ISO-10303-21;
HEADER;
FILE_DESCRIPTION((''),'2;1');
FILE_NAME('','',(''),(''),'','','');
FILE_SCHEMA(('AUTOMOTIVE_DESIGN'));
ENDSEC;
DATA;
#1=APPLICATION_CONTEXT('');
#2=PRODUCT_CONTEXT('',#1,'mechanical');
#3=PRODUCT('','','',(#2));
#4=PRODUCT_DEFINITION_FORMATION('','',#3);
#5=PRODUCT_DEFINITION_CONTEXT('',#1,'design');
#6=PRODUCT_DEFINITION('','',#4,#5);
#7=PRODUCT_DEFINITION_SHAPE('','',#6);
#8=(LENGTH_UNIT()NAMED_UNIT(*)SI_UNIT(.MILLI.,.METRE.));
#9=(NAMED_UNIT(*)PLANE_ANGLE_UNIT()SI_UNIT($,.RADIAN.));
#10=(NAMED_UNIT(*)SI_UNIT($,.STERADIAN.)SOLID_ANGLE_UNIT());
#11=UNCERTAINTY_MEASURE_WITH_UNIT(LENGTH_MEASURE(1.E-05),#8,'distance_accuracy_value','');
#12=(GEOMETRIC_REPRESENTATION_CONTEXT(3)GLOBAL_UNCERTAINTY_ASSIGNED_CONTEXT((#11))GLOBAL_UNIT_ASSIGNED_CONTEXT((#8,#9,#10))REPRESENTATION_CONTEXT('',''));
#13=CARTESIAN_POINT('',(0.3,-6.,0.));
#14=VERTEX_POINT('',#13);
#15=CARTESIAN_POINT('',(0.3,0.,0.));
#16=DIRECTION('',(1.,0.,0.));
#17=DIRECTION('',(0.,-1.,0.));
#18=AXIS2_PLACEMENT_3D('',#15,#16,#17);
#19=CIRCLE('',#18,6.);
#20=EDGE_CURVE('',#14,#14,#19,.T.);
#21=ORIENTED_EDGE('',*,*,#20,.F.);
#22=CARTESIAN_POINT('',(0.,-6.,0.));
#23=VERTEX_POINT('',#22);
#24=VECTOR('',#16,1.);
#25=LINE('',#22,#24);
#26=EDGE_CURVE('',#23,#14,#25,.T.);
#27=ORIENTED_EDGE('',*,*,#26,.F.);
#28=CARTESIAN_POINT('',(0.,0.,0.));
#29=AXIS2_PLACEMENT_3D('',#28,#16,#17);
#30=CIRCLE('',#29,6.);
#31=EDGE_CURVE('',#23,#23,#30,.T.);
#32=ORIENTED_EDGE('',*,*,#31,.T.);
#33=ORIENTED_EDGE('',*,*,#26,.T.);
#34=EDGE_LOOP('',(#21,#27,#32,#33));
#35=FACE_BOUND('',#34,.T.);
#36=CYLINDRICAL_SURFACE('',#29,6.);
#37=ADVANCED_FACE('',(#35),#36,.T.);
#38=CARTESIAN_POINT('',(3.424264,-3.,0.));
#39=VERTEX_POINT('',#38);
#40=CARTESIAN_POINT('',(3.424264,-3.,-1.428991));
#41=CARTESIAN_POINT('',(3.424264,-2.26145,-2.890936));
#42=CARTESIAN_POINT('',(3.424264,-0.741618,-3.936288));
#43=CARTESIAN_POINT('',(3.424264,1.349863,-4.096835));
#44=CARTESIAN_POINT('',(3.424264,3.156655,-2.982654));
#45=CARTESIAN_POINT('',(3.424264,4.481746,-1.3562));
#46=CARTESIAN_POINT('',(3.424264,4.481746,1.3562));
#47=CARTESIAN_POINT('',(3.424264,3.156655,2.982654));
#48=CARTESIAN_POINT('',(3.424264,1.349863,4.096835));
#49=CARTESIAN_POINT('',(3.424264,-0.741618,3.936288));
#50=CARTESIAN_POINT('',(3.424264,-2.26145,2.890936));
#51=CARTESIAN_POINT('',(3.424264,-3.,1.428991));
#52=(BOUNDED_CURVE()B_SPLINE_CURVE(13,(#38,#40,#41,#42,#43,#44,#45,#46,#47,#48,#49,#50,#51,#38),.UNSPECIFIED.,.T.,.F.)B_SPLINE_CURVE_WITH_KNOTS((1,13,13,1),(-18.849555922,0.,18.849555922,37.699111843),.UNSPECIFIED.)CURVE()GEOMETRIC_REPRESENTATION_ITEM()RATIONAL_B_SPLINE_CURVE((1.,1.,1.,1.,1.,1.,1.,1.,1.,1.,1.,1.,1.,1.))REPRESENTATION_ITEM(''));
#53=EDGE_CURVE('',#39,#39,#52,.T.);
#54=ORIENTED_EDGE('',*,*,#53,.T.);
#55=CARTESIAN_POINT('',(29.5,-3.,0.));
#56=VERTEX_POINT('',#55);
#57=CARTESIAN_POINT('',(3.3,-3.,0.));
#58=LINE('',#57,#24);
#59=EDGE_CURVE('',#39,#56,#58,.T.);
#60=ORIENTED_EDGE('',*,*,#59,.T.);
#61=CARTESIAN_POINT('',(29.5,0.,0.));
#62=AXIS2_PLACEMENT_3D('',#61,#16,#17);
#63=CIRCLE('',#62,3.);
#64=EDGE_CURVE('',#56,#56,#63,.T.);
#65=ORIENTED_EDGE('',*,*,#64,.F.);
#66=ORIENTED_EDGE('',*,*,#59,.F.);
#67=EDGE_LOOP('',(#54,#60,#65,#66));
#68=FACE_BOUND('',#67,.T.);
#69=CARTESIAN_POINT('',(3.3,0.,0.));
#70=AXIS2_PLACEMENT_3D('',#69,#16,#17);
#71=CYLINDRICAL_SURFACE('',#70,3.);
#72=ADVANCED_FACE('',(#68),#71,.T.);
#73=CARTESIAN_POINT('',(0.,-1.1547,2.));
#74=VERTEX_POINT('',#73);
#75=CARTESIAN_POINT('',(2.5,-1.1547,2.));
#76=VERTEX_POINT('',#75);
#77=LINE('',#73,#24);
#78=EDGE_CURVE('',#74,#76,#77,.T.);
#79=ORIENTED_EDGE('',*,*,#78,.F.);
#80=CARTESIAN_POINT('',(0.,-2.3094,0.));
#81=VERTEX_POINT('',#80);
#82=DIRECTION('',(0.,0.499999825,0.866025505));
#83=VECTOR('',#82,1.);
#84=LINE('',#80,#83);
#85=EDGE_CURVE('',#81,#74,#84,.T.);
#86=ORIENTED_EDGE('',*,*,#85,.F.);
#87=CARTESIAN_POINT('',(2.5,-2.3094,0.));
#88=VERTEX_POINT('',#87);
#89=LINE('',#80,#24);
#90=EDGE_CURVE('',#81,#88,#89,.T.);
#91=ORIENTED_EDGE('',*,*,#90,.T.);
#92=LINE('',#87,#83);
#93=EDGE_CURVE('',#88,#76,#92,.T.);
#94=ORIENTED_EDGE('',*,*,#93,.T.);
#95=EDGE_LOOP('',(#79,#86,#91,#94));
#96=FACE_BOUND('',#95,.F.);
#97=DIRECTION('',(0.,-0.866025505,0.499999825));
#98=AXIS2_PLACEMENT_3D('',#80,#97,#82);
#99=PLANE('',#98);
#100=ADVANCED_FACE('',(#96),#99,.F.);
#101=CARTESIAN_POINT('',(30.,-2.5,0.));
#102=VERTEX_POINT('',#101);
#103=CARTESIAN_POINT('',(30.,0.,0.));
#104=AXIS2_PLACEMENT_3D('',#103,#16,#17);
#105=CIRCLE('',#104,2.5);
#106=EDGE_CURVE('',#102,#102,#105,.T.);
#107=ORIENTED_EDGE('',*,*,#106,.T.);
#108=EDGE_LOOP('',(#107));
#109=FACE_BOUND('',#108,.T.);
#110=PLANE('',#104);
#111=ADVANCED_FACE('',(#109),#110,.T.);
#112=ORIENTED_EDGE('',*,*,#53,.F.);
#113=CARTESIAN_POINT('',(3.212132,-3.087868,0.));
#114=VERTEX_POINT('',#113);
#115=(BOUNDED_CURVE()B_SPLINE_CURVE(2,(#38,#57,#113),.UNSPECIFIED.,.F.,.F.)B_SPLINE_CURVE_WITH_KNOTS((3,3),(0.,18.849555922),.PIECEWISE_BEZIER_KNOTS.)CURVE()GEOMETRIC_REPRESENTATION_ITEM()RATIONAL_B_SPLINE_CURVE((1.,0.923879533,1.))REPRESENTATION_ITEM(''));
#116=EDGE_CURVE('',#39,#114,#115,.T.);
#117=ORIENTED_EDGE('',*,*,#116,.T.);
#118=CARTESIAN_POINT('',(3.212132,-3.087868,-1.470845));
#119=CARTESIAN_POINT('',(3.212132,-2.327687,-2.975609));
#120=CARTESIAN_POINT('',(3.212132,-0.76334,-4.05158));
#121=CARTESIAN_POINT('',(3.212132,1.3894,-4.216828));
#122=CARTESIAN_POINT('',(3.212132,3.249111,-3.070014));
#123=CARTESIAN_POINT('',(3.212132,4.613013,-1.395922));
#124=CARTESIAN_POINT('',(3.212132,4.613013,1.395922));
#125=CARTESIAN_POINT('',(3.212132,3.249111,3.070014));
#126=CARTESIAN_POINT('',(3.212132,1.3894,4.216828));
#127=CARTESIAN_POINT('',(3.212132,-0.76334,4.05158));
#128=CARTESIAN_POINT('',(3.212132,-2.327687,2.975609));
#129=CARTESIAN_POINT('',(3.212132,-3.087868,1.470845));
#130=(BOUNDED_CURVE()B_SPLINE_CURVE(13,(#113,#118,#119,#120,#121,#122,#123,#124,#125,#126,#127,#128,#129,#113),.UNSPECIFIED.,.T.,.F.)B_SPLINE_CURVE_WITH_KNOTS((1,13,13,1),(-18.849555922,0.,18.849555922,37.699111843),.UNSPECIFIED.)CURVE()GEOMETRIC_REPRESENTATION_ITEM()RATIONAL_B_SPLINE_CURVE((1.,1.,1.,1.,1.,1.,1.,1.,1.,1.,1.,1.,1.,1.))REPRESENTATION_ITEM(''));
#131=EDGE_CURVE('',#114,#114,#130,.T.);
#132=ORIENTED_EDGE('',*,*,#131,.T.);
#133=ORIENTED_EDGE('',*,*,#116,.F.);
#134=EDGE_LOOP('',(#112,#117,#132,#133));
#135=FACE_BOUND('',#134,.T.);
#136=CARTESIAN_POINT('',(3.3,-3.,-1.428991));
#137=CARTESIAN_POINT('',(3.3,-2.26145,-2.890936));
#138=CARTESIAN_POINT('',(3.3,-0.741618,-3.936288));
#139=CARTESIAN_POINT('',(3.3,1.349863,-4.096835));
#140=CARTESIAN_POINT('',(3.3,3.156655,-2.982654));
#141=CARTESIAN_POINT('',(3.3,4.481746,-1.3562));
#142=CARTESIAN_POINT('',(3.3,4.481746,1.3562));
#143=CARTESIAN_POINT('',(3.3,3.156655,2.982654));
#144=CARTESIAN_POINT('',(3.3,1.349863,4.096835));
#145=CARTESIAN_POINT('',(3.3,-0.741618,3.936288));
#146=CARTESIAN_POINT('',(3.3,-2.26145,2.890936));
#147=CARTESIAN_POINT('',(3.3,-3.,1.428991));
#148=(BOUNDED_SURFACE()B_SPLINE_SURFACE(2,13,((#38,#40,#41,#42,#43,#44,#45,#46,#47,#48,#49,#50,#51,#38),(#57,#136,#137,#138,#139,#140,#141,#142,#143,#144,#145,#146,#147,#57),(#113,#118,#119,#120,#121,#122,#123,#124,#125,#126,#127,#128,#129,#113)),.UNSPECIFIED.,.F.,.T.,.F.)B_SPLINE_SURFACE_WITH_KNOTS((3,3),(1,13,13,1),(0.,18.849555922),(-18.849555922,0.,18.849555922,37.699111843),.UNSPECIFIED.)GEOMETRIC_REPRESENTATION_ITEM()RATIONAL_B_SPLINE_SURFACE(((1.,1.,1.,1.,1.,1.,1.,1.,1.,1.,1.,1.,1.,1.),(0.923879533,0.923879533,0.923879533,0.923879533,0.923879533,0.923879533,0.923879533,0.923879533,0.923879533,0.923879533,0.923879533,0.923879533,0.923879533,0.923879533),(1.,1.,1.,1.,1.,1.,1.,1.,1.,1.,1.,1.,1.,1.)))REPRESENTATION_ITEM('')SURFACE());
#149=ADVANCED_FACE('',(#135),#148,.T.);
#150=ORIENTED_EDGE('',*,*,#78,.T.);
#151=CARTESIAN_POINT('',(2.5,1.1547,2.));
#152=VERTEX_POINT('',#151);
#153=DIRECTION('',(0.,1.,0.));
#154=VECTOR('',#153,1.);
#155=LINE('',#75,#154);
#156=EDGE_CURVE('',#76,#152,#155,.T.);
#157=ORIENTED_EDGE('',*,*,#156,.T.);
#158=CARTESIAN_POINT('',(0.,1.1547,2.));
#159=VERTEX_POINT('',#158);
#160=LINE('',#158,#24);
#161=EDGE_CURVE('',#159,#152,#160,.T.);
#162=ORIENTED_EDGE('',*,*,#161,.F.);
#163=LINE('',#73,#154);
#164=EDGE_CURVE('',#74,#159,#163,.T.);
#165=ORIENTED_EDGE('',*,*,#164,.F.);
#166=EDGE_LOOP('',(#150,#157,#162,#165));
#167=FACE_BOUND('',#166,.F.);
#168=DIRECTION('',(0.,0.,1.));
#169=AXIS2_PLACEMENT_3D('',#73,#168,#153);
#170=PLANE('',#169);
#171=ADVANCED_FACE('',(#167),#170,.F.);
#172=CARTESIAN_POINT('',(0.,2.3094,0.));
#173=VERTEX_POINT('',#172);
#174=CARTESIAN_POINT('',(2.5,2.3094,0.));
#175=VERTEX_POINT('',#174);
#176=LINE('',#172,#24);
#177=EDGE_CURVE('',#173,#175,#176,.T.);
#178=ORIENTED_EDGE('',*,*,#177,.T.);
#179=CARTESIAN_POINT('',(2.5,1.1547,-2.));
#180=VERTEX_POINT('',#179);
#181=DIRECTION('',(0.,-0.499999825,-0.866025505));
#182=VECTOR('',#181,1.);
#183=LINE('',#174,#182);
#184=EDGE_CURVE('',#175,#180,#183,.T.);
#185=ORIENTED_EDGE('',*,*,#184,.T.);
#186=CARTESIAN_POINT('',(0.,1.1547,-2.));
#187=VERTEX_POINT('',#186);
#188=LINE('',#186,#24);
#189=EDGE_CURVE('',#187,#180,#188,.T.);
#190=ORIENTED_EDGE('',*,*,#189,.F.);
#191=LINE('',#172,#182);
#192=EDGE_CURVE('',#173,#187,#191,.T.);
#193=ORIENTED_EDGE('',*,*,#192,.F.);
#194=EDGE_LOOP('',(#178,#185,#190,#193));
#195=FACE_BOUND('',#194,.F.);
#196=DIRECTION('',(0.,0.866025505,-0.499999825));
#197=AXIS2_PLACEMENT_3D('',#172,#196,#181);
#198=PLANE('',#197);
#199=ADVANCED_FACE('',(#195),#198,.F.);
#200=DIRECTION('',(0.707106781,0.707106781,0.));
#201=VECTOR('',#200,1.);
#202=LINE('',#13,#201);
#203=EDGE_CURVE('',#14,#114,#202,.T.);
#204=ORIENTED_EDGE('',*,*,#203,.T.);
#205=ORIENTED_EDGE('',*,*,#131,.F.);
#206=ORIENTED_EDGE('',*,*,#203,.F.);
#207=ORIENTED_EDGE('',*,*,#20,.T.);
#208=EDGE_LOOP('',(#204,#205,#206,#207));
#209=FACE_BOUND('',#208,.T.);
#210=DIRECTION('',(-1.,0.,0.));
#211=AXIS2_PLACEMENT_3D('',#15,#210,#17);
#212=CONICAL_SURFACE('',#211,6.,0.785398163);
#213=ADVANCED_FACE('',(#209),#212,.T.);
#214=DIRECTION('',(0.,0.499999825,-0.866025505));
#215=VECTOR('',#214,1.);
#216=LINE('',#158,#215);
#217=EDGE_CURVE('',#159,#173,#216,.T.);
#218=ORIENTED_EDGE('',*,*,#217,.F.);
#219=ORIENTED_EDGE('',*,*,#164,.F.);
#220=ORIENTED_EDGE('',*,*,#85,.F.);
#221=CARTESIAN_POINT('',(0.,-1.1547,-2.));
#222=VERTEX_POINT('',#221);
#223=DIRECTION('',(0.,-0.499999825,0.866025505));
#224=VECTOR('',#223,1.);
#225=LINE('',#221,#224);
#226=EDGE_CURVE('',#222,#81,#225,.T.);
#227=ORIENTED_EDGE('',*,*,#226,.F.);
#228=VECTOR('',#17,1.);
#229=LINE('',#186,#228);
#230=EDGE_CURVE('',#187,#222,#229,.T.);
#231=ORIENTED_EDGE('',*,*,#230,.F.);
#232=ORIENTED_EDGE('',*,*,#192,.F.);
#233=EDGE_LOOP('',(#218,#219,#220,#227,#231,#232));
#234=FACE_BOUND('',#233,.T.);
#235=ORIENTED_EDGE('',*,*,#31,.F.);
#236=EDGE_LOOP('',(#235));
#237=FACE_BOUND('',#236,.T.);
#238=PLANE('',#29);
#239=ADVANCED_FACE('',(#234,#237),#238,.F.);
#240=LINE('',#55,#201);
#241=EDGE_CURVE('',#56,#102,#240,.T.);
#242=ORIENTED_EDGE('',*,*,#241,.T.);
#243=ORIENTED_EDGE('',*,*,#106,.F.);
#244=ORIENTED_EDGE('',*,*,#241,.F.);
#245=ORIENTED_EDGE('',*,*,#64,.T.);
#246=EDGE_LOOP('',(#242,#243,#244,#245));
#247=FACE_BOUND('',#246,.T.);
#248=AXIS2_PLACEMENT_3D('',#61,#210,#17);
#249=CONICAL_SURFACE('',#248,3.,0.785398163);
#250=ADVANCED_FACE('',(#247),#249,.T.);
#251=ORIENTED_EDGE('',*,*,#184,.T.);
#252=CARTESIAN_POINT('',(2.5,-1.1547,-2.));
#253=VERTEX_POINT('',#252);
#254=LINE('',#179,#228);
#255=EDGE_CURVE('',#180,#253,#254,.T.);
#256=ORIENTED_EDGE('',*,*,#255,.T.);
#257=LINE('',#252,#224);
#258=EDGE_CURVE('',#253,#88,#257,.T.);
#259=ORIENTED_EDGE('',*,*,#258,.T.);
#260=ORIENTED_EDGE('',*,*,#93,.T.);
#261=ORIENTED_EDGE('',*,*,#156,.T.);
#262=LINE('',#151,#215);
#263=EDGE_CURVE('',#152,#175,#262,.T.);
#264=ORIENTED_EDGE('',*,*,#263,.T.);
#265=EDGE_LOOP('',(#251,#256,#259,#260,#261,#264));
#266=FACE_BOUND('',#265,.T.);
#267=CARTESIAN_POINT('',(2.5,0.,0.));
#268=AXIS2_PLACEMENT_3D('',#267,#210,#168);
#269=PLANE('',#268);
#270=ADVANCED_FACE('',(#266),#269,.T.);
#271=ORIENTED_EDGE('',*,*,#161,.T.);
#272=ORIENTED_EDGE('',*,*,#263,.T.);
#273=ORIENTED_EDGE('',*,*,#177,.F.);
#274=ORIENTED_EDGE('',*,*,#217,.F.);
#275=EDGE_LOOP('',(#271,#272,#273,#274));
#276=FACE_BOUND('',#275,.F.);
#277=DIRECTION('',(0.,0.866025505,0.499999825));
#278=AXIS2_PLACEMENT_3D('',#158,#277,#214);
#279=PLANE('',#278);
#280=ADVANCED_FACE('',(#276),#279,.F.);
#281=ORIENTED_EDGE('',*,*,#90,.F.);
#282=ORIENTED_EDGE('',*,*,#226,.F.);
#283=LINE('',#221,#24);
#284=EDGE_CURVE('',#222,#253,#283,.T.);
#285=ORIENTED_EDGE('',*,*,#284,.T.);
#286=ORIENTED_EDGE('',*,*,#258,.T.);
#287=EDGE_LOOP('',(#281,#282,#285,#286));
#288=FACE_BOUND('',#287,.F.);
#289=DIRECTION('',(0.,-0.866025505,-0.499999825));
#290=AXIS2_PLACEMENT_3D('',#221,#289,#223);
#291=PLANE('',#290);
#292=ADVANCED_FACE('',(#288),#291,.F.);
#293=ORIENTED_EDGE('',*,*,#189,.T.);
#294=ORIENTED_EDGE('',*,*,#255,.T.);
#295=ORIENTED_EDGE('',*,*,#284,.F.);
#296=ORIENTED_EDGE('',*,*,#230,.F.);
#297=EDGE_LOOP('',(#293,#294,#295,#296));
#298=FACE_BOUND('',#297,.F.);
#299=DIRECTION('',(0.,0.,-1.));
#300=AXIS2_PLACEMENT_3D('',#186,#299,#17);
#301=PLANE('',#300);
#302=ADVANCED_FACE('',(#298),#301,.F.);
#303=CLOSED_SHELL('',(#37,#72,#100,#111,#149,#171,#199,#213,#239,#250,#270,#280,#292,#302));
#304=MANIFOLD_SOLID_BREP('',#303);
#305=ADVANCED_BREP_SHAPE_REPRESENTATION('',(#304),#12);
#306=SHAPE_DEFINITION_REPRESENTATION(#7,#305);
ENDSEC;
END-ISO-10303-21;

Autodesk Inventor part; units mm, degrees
ref_plane "YZ Plane" through (0, 0, 0) normal (1, 0, 0) x (0, 1, 0)
sketch "Sketch1" plane through (0, 0, 0) normal (0, 1, 0) x (-1, 0, 0)
  point P0 (0, 0)
sketch "Sketch2" plane through (0, 0, 0) normal (0, 0, 1) x (-1, 0, 0)
  line L0 (-30, 3) -> (-30, 0)
  line L1 (-3.3, 3) -> (-30, 3)
  line L2 (-0.3, 6) -> (-3.3, 3)
  line L3 (0, 6) -> (-0.3, 6)
  line L4 (0, 0) -> (0, 6)
  line L5 (-30, 0) -> (0, 0)
  line L6 (-30, 0) -> (0, 0)
  line L7 (0, -9.6) -> (0, 1.6) projected
  line L8 (6, 0) -> (-36, 0) projected
  dimension "ParC" = 0.3
  dimension "d43" = 45
  dimension "d44" = 6
  dimension "d45" = 3
  dimension "d46" = 30
  dimension "d47" = 0
  dimension "d48" = 0
revolve "Revolution1" add sketch "Sketch2" angle 360 about axis through (30, 0, 0) along (1, 0, 0)
sketch "Sketch3" plane through (0, 0, 0) normal (-1, 0, 0) x (0, 0, 1)
  line L0 (-2, 1.1547) -> (-2, -1.1547)
  line L1 (0, 2.3094) -> (-2, 1.1547)
  line L2 (2, 1.1547) -> (0, 2.3094)
  line L3 (2, -1.1547) -> (2, 1.1547)
  line L4 (0, -2.3094) -> (2, -1.1547)
  line L5 (-2, -1.1547) -> (0, -2.3094)
  circle A0 centre (0, 0) radius 2 construction
  circle A1 centre (0, 0) radius 3 construction
  dimension "d11" = 4
  dimension "d13" = 120
  dimension "d15" = 120
extrude "Extrusion1" cut sketch "Sketch3" against normal blind 2.5
fillet "Fillet1" radius 0.3 1 edges at (3.3, 3, 0)
chamfer "Chamfer1" distance 0.5 angle 45 1 edges at (30, 3, 0) measured on face at (21.1414, -2.4612, -1.7154)
thread "Thread1" size "M6x1" class "6g" standard "ISO Metric profile" length 18
ref_plane "MSC_PF1" through (0, 0, 0) normal (1, 0, 0) x (0, 1, 0)
ref_plane "MSC_PT1" through (0, 0, 0) normal (1, 0, 0) x (0, 1, 0)
equation "\"d43\" = 0.5 * ang"
equation "\"d44\" = 0.5 * dk"
equation "\"d45\" = 0.5 * NND"
equation "\"d46\" = NLG"
equation "\"d18\" = r"
equation "\"d19\" = 0.5 * PTC"
equation "\"d39\" = 0.5 * PTC"
equation "\"d11\" = ParS"
equation "\"d16\" = ParT"
equation "\"NND\" = 6"
equation "\"PTC\" = 1"
equation "\"dk\" = 12"
equation "\"ParK\" = 3.3"
equation "\"ParS\" = 4"
equation "\"ParT\" = 2.5"
equation "\"r\" = 0.3"
equation "\"NLG\" = 30"
equation "\"ang\" = 90deg"
equation "\"THREADDIA\" = NND"
properties part number "M6 x 30  (AL Profile)" material "Steel"
